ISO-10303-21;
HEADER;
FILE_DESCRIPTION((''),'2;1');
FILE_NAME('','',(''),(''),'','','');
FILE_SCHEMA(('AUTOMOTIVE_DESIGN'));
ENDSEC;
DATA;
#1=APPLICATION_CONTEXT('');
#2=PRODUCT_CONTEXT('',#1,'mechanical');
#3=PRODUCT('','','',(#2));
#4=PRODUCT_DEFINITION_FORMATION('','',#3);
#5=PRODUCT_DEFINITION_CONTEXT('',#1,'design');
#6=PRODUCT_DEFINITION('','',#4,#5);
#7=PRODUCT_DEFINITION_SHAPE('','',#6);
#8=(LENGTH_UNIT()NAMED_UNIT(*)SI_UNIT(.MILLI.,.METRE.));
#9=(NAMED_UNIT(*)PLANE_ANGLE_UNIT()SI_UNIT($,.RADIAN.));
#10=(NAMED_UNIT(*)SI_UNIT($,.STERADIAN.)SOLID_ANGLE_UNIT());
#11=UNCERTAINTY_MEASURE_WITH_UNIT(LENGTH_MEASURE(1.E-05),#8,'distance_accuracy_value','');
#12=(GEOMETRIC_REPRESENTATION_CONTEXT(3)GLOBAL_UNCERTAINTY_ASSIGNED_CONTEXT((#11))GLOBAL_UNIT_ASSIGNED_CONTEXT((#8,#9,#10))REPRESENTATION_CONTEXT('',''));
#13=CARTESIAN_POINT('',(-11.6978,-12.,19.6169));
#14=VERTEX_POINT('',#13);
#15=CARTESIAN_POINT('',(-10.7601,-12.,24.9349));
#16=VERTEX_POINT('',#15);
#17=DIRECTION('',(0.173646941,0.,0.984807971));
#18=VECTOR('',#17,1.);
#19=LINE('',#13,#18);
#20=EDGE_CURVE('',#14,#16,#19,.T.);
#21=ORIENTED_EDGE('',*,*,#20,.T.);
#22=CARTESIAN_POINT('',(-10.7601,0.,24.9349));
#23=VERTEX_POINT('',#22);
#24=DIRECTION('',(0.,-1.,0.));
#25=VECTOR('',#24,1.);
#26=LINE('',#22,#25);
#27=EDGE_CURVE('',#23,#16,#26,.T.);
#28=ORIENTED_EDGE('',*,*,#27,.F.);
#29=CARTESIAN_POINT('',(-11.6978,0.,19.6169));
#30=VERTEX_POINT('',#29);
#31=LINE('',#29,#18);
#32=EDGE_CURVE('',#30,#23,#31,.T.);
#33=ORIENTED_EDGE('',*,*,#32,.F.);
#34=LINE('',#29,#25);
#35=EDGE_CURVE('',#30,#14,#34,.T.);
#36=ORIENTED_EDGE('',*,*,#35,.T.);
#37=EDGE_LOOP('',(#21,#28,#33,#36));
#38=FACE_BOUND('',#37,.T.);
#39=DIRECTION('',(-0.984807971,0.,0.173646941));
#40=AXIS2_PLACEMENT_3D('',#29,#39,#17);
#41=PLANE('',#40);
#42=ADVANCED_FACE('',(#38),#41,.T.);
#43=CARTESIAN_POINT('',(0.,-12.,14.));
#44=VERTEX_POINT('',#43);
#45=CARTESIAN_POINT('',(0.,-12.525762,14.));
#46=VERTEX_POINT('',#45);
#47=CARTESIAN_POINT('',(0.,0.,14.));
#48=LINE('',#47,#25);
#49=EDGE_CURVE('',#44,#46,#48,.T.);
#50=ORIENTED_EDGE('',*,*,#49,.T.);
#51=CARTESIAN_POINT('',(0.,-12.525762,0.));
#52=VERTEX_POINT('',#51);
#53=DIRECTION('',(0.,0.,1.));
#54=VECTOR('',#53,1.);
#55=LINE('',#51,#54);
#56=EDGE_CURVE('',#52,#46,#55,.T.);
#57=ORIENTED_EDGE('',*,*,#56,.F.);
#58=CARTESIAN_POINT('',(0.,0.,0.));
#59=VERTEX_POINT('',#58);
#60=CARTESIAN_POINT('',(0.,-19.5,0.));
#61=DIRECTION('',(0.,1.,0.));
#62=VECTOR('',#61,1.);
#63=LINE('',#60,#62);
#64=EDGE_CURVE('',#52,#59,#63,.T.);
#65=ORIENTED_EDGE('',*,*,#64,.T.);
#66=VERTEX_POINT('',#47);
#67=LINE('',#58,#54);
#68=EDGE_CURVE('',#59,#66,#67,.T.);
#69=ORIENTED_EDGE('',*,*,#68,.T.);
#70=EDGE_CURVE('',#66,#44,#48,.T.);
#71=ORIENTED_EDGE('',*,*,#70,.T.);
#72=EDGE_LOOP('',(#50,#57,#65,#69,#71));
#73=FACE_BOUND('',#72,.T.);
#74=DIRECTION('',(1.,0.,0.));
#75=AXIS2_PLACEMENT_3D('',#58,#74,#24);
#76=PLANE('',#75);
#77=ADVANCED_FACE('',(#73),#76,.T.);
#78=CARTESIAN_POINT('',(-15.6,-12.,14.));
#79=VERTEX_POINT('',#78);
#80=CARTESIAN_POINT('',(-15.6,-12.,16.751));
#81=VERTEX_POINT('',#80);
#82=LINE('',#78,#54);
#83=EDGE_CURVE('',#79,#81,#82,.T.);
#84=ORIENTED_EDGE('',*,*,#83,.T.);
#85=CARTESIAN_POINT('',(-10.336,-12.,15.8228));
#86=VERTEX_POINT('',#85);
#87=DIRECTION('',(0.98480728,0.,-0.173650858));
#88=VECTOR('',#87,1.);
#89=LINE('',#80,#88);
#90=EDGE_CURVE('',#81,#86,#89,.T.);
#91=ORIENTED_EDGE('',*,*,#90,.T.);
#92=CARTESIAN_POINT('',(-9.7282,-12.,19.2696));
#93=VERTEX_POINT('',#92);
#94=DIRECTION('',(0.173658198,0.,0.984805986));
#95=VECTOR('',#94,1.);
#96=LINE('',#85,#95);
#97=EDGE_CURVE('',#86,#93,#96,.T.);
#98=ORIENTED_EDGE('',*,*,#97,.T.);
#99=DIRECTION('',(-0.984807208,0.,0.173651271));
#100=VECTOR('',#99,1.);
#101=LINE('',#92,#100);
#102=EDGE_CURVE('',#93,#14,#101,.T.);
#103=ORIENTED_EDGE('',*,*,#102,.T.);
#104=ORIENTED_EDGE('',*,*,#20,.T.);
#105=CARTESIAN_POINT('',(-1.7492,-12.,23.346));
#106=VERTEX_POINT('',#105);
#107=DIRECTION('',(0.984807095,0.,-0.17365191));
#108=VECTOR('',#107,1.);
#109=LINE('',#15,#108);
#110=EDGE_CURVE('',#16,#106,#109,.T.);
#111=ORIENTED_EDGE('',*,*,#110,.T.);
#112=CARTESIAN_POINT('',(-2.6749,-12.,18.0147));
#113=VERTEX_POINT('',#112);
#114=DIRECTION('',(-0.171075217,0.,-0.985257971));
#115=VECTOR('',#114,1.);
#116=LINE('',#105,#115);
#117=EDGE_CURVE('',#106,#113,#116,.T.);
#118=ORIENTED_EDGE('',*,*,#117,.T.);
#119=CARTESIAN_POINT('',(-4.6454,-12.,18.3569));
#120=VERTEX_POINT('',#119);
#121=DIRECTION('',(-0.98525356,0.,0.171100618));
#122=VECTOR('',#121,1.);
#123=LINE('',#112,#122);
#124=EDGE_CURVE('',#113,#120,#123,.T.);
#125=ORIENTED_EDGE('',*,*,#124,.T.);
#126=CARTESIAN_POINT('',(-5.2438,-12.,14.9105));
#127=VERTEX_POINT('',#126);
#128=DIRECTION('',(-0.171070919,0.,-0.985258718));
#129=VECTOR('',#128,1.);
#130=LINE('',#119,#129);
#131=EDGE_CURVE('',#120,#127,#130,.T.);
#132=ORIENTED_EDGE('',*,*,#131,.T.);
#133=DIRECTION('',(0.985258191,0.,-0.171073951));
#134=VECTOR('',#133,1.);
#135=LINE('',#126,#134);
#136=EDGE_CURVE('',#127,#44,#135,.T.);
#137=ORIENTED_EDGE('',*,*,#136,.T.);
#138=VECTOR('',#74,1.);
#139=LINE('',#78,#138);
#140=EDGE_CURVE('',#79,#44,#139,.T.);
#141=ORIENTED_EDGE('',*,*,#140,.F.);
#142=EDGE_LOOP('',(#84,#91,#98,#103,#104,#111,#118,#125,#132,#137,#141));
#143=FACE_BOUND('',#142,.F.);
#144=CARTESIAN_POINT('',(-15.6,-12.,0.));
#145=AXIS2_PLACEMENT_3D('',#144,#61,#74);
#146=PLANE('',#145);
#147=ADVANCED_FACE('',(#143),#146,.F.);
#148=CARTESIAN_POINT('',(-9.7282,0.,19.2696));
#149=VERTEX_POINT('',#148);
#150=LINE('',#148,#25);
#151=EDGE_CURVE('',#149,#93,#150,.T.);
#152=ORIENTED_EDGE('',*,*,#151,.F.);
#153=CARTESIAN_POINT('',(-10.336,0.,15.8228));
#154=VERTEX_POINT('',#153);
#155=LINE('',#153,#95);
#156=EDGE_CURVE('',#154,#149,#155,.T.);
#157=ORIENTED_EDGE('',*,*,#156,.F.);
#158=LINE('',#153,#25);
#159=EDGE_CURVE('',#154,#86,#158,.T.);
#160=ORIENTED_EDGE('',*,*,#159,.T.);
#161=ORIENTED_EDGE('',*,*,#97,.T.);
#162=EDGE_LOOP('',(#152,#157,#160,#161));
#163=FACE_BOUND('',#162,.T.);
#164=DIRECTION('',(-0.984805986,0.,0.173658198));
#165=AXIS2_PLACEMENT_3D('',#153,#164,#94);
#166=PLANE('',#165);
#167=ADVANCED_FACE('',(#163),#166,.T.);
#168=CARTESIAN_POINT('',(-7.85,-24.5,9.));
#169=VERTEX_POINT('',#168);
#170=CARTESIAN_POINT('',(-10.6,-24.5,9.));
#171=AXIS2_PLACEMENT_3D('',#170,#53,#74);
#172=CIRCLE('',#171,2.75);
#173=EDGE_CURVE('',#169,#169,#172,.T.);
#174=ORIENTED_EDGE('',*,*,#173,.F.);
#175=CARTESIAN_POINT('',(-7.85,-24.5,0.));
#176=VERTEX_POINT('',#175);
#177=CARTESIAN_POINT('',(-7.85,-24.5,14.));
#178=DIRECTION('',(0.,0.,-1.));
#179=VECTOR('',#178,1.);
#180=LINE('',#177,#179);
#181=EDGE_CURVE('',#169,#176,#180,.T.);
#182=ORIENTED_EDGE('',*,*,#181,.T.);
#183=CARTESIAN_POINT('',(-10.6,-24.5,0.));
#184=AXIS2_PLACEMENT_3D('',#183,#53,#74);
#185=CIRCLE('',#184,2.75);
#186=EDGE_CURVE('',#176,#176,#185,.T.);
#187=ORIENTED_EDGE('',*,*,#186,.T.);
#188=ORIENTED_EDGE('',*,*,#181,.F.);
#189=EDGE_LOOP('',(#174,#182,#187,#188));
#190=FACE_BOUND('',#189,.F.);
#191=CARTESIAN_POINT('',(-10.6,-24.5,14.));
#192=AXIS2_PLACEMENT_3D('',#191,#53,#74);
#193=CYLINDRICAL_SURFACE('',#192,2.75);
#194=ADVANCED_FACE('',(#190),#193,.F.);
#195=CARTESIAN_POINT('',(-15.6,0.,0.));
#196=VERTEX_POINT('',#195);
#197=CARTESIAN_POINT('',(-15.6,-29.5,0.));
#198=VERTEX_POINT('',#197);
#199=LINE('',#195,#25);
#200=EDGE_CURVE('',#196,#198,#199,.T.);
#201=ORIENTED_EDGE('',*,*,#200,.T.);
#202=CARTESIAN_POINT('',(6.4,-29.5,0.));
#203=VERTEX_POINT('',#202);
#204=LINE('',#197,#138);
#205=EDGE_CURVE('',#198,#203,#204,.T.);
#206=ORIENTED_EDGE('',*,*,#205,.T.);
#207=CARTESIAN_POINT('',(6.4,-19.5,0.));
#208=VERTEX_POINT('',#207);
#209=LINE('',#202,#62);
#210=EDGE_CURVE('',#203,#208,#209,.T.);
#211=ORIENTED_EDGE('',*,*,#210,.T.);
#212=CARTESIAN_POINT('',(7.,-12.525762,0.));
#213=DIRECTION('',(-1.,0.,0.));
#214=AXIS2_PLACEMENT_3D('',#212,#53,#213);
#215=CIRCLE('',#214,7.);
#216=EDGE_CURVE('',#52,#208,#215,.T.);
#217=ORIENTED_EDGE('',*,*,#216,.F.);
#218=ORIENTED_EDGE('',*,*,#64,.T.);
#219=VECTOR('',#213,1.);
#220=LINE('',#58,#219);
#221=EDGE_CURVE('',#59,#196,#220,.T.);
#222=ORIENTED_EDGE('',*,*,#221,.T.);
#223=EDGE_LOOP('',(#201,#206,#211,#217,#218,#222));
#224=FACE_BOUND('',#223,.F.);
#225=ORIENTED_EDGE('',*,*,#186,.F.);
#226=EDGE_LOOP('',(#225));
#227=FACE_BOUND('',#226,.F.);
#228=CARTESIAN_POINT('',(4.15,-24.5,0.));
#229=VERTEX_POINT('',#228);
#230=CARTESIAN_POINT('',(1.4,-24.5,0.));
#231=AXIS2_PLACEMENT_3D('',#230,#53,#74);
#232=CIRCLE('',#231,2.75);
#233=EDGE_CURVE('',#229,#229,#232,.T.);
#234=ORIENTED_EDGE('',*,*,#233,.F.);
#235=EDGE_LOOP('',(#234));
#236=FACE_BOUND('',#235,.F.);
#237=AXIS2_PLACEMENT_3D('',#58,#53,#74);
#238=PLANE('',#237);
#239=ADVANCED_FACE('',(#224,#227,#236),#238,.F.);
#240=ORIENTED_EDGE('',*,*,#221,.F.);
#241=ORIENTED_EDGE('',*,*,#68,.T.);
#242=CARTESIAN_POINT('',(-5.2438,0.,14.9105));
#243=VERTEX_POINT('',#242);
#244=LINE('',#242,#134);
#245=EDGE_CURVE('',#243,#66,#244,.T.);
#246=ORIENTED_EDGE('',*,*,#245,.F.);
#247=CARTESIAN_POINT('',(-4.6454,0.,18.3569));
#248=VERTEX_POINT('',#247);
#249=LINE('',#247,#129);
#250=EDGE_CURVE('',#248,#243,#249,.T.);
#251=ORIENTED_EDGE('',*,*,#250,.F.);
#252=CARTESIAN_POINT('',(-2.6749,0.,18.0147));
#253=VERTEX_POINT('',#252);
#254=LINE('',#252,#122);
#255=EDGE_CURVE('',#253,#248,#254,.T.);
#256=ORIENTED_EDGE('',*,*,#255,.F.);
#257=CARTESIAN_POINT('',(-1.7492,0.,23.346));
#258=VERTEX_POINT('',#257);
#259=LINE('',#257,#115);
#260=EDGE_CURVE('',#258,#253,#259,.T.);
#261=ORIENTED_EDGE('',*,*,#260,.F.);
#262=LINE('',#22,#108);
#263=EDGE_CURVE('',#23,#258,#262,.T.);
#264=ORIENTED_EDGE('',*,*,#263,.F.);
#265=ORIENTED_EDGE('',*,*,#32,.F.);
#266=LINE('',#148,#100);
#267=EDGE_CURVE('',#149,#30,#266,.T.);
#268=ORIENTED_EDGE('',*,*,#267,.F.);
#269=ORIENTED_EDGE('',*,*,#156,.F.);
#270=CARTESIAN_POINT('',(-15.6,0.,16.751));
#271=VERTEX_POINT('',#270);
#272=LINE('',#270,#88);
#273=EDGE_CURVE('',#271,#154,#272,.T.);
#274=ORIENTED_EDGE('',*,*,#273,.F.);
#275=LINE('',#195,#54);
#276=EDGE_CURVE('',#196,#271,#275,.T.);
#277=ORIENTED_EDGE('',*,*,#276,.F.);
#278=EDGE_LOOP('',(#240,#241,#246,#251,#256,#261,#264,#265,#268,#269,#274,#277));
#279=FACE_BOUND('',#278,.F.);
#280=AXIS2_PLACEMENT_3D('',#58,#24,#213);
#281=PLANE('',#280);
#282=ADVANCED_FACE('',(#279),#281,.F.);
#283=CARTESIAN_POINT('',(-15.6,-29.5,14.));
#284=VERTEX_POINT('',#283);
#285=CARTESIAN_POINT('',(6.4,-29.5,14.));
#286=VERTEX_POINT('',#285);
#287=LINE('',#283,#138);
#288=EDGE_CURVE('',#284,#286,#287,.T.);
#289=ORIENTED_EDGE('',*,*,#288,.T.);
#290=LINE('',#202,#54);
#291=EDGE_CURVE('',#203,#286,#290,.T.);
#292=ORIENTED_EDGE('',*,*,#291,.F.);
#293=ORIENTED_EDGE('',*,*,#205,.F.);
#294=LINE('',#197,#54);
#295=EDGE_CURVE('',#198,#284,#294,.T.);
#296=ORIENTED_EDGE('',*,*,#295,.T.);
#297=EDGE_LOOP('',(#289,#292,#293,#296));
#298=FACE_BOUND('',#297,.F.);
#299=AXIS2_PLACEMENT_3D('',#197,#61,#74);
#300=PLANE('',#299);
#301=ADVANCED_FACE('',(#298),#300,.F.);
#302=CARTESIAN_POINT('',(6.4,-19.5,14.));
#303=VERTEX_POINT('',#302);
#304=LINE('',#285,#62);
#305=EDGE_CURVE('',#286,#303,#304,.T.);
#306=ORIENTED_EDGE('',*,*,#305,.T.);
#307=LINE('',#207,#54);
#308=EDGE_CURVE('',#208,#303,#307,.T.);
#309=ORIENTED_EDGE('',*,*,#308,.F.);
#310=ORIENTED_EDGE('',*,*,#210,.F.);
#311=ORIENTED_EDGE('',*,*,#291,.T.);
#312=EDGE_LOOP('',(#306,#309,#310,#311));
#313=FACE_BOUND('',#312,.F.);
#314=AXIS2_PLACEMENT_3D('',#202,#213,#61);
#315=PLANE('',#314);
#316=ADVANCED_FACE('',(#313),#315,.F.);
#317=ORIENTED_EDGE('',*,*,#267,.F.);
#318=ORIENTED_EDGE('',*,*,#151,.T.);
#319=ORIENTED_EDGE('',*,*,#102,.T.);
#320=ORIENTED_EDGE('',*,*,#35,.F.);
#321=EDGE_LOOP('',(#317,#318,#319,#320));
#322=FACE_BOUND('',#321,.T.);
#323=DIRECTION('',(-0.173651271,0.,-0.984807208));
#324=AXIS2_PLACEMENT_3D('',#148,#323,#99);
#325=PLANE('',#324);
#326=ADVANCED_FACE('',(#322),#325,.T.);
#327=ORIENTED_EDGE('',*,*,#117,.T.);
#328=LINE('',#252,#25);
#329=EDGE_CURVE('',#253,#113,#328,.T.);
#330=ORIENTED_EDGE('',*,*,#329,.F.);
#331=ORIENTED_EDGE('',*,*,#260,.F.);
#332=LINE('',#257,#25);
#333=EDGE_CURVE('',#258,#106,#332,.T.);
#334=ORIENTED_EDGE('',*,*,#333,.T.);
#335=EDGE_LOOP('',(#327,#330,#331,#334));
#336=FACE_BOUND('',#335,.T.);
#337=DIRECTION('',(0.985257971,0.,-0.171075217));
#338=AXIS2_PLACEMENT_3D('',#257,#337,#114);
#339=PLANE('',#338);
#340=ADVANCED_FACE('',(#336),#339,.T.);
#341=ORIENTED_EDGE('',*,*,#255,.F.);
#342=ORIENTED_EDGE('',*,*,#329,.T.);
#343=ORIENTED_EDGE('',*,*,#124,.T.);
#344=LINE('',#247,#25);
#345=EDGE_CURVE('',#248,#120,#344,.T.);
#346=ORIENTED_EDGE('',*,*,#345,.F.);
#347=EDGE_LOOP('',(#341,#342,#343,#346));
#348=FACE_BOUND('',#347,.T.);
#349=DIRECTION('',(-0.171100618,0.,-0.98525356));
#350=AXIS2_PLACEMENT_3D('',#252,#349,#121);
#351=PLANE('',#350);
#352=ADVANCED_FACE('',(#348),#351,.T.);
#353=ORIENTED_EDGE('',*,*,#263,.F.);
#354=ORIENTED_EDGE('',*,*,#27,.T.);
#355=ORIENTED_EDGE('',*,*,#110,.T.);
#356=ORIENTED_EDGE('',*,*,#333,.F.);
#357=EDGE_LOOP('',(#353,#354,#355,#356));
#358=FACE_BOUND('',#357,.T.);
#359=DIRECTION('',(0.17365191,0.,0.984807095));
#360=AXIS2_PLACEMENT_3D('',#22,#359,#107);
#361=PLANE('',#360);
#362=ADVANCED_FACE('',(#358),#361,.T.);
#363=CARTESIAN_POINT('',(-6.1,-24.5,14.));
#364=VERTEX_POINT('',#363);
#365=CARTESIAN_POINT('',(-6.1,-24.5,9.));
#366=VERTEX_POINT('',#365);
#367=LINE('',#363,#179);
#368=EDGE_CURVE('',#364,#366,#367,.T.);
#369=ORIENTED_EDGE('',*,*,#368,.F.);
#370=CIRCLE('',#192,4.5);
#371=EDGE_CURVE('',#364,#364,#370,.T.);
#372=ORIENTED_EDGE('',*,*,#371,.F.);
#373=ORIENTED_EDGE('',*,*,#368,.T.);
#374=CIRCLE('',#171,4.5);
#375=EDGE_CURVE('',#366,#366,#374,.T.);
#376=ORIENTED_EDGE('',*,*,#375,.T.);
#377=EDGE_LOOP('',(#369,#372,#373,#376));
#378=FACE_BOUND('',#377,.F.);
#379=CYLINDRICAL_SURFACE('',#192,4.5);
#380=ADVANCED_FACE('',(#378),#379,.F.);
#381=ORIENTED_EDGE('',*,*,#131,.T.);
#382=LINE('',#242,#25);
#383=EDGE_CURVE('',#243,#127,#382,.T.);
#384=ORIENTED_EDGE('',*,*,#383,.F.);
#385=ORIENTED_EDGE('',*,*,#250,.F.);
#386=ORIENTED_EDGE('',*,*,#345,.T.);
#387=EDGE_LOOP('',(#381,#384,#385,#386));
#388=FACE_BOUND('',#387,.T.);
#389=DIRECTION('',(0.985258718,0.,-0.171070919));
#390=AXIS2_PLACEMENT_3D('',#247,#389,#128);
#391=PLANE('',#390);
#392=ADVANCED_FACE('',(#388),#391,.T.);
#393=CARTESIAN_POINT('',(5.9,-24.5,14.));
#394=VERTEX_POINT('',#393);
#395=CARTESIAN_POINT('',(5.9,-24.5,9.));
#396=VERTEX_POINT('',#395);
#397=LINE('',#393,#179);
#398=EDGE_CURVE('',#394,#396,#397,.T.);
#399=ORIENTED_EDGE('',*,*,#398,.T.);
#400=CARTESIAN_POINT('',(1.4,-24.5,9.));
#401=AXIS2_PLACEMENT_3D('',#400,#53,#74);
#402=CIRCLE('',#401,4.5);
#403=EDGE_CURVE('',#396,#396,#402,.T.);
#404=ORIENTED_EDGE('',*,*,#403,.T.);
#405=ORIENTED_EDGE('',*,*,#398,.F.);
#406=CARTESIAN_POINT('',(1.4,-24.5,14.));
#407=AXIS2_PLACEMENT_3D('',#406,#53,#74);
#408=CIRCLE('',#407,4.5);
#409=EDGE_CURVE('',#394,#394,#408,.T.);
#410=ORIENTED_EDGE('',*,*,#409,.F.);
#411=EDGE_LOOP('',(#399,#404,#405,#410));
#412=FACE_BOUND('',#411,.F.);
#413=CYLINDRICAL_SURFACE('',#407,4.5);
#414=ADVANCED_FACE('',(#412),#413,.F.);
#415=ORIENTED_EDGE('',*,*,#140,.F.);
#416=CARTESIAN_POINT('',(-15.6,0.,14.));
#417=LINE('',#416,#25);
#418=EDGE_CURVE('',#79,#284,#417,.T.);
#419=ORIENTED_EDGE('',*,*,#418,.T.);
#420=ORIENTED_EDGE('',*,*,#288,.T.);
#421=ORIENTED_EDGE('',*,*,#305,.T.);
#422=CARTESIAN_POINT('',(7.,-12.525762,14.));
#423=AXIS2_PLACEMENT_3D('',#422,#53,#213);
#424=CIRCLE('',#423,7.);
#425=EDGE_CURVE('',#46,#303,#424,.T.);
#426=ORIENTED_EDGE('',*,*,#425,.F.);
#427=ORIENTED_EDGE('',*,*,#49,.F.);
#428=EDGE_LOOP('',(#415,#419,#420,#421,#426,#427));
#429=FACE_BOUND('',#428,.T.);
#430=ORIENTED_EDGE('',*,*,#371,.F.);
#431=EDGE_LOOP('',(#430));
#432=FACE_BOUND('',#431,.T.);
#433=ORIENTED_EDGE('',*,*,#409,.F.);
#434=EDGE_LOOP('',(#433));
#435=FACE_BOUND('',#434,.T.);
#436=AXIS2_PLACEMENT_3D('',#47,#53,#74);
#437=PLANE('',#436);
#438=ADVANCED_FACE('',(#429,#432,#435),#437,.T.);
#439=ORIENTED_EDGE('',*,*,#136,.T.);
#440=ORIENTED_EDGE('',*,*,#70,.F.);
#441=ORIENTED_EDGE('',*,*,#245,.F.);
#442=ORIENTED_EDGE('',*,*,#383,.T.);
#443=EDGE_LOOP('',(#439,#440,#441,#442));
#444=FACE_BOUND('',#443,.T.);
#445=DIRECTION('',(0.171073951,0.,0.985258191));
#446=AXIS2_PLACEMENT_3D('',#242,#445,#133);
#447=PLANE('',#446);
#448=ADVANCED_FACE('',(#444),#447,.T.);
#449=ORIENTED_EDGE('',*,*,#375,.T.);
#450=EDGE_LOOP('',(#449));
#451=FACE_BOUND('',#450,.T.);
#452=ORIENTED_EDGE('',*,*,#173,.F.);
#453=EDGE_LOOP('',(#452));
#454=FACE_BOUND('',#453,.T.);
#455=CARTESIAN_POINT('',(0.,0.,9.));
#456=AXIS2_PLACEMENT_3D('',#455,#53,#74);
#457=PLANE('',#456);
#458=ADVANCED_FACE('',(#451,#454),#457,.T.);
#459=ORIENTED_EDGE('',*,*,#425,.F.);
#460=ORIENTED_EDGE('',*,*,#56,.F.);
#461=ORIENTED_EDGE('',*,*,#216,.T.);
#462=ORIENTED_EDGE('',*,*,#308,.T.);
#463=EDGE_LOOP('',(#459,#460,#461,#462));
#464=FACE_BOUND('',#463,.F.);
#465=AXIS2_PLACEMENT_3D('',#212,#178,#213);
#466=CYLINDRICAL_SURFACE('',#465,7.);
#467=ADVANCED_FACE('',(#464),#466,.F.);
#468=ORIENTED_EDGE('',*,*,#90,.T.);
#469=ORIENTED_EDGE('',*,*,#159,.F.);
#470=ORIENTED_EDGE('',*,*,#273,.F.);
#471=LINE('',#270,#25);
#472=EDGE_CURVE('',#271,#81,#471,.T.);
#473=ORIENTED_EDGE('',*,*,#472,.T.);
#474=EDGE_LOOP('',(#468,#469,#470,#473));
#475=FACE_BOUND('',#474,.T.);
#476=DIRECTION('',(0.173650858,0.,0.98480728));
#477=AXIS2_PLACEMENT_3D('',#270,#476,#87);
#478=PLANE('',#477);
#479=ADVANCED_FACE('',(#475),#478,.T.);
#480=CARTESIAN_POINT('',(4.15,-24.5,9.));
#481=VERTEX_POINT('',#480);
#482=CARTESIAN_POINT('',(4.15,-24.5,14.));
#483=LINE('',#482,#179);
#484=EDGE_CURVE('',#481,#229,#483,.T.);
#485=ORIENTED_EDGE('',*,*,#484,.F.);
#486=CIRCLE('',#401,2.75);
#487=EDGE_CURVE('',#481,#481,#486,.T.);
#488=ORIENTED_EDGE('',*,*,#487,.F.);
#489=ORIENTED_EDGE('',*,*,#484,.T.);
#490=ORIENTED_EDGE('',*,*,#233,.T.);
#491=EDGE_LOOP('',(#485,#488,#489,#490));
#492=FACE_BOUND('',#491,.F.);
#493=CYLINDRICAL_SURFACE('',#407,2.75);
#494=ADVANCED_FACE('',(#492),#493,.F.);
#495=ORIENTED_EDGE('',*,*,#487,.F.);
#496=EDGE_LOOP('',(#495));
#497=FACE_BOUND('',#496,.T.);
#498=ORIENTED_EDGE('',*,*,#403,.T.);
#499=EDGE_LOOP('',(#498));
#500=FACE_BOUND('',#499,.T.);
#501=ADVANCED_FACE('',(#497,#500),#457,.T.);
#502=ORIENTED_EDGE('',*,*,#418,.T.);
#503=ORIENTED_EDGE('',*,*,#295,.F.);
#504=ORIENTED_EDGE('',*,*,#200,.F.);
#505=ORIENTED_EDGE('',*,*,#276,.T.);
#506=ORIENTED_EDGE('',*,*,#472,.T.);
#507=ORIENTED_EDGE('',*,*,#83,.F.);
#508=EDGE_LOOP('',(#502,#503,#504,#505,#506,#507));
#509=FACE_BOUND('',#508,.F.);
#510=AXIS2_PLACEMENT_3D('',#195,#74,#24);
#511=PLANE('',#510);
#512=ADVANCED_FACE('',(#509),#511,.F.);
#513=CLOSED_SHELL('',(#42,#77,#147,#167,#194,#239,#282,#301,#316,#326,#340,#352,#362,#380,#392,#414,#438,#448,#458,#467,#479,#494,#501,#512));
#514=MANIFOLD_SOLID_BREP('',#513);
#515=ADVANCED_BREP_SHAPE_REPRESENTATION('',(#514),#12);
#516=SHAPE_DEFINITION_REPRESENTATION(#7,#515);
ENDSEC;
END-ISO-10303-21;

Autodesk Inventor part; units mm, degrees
ref_plane "YZ Plane" through (0, 0, 0) normal (1, 0, 0) x (0, 1, 0)
ref_plane "XZ Plane" through (0, 0, 0) normal (0, 1, 0) x (-1, 0, 0)
ref_plane "XY Plane" through (0, 0, 0) normal (0, 0, 1) x (1, 0, 0)
sketch "Sketch5" plane through (0, 0, 0) normal (0, 0, 1) x (1, 0, 0)
  line L0 (0, 0) -> (-15.6, 0)
  line L1 (-15.6, 0) -> (-15.6, -29.5)
  line L2 (-15.6, -29.5) -> (6.4, -29.5)
  line L3 (6.4, -29.5) -> (6.4, -19.5)
  line L4 (0, 0) -> (0, -12.526)
  line L5 (0, -12.526) -> (0, -19.5)
  line L6 (0, -19.5) -> (6.4, -19.5)
  dimension "d111" = 15.6
  dimension "d112" = 29.5
  dimension "d113" = 22
  dimension "d114" = 10
  dimension "d116" = 12.526
extrude "Extrusion2" add sketch "Sketch5" along normal blind 14
sketch "Skizze14" plane through (0, 0, 14) normal (0, 0, 1) x (1, 0, 0)
  line L0 (-15.6, -29.5) -> (6.4, -29.5) projected
  line L1 (-15.6, 0) -> (-15.6, -29.5) projected
  circle A0 centre (-10.6, -24.5) radius 4.5
  circle A1 centre (1.4, -24.5) radius 4.5
  circle A2 centre (-10.6, -24.5) radius 2.75
  circle A3 centre (1.4, -24.5) radius 2.75
  point P0 (0, 0)
  dimension "d117" = 5
  dimension "d118" = 5
  dimension "d119" = 12
  dimension "d120" = 5
  dimension "d121" = 9
  dimension "d122" = 9
  dimension "d123" = 5.5
  dimension "d124" = 5.5
extrude "Extrusion9" cut sketch "Skizze14" against normal blind 5 contours A0 | A1 | A2 | A3
sketch "Skizze16" plane through (0, 0, 14) normal (0, 0, 1) x (1, 0, 0)
  circle A0 centre (-10.6, -24.5) radius 2.75
  circle A1 centre (1.4, -24.5) radius 2.75
  line L0 (-15.6, 0) -> (-15.6, -29.5) projected
  line L1 (-15.6, -29.5) -> (6.4, -29.5) projected
  line L2 (6.4, -29.5) -> (6.4, -19.5) projected
  point P0 (0, 0)
  dimension "d127" = 5
  dimension "d128" = 5
  dimension "d129" = 5
  dimension "d130" = 5
  dimension "d131" = 5.5
  dimension "d132" = 5.5
extrude "Extrusion10" cut sketch "Skizze16" against normal blind 15
fillet "Rundung3" radius 7 1 edges at (0, -19.5, 7)
sketch "Skizze17" plane through (-15.6, 0, 0) normal (0, 1, 0) x (1, 0, 0)
  line L0 (0, -14) -> (22, -14) projected
  line L1 (0, -14) -> (0, -16.751)
  line L2 (0, -16.751) -> (5.264, -15.8228)
  line L3 (5.8718, -19.2696) -> (3.9022, -19.6169)
  line L4 (3.9022, -19.6169) -> (4.8399, -24.9349)
  line L5 (4.8399, -24.9349) -> (13.8508, -23.346)
  line L6 (10.3562, -14.9105) -> (15.6, -14)
  line L7 (5.264, -15.8228) -> (5.8718, -19.2696)
  line L8 (13.8508, -23.346) -> (12.9251, -18.0147)
  line L9 (12.9251, -18.0147) -> (10.9546, -18.3569)
  line L10 (10.9546, -18.3569) -> (10.3562, -14.9105)
  point P0 (15.6, 0)
  dimension "d136" = 2.751
  dimension "d137" = 80
  dimension "d141" = 3.5
  dimension "d143" = 2
  dimension "d144" = 5.4
  dimension "d145" = 9.15
  dimension "d147" = 2
extrude "Extrusion11" add sketch "Skizze17" against normal blind 12
equation "\"l1\" = 8"
properties part number "Finray_9_Kerbe_10deg_anschluss_erweitert_9_75 Nut"
